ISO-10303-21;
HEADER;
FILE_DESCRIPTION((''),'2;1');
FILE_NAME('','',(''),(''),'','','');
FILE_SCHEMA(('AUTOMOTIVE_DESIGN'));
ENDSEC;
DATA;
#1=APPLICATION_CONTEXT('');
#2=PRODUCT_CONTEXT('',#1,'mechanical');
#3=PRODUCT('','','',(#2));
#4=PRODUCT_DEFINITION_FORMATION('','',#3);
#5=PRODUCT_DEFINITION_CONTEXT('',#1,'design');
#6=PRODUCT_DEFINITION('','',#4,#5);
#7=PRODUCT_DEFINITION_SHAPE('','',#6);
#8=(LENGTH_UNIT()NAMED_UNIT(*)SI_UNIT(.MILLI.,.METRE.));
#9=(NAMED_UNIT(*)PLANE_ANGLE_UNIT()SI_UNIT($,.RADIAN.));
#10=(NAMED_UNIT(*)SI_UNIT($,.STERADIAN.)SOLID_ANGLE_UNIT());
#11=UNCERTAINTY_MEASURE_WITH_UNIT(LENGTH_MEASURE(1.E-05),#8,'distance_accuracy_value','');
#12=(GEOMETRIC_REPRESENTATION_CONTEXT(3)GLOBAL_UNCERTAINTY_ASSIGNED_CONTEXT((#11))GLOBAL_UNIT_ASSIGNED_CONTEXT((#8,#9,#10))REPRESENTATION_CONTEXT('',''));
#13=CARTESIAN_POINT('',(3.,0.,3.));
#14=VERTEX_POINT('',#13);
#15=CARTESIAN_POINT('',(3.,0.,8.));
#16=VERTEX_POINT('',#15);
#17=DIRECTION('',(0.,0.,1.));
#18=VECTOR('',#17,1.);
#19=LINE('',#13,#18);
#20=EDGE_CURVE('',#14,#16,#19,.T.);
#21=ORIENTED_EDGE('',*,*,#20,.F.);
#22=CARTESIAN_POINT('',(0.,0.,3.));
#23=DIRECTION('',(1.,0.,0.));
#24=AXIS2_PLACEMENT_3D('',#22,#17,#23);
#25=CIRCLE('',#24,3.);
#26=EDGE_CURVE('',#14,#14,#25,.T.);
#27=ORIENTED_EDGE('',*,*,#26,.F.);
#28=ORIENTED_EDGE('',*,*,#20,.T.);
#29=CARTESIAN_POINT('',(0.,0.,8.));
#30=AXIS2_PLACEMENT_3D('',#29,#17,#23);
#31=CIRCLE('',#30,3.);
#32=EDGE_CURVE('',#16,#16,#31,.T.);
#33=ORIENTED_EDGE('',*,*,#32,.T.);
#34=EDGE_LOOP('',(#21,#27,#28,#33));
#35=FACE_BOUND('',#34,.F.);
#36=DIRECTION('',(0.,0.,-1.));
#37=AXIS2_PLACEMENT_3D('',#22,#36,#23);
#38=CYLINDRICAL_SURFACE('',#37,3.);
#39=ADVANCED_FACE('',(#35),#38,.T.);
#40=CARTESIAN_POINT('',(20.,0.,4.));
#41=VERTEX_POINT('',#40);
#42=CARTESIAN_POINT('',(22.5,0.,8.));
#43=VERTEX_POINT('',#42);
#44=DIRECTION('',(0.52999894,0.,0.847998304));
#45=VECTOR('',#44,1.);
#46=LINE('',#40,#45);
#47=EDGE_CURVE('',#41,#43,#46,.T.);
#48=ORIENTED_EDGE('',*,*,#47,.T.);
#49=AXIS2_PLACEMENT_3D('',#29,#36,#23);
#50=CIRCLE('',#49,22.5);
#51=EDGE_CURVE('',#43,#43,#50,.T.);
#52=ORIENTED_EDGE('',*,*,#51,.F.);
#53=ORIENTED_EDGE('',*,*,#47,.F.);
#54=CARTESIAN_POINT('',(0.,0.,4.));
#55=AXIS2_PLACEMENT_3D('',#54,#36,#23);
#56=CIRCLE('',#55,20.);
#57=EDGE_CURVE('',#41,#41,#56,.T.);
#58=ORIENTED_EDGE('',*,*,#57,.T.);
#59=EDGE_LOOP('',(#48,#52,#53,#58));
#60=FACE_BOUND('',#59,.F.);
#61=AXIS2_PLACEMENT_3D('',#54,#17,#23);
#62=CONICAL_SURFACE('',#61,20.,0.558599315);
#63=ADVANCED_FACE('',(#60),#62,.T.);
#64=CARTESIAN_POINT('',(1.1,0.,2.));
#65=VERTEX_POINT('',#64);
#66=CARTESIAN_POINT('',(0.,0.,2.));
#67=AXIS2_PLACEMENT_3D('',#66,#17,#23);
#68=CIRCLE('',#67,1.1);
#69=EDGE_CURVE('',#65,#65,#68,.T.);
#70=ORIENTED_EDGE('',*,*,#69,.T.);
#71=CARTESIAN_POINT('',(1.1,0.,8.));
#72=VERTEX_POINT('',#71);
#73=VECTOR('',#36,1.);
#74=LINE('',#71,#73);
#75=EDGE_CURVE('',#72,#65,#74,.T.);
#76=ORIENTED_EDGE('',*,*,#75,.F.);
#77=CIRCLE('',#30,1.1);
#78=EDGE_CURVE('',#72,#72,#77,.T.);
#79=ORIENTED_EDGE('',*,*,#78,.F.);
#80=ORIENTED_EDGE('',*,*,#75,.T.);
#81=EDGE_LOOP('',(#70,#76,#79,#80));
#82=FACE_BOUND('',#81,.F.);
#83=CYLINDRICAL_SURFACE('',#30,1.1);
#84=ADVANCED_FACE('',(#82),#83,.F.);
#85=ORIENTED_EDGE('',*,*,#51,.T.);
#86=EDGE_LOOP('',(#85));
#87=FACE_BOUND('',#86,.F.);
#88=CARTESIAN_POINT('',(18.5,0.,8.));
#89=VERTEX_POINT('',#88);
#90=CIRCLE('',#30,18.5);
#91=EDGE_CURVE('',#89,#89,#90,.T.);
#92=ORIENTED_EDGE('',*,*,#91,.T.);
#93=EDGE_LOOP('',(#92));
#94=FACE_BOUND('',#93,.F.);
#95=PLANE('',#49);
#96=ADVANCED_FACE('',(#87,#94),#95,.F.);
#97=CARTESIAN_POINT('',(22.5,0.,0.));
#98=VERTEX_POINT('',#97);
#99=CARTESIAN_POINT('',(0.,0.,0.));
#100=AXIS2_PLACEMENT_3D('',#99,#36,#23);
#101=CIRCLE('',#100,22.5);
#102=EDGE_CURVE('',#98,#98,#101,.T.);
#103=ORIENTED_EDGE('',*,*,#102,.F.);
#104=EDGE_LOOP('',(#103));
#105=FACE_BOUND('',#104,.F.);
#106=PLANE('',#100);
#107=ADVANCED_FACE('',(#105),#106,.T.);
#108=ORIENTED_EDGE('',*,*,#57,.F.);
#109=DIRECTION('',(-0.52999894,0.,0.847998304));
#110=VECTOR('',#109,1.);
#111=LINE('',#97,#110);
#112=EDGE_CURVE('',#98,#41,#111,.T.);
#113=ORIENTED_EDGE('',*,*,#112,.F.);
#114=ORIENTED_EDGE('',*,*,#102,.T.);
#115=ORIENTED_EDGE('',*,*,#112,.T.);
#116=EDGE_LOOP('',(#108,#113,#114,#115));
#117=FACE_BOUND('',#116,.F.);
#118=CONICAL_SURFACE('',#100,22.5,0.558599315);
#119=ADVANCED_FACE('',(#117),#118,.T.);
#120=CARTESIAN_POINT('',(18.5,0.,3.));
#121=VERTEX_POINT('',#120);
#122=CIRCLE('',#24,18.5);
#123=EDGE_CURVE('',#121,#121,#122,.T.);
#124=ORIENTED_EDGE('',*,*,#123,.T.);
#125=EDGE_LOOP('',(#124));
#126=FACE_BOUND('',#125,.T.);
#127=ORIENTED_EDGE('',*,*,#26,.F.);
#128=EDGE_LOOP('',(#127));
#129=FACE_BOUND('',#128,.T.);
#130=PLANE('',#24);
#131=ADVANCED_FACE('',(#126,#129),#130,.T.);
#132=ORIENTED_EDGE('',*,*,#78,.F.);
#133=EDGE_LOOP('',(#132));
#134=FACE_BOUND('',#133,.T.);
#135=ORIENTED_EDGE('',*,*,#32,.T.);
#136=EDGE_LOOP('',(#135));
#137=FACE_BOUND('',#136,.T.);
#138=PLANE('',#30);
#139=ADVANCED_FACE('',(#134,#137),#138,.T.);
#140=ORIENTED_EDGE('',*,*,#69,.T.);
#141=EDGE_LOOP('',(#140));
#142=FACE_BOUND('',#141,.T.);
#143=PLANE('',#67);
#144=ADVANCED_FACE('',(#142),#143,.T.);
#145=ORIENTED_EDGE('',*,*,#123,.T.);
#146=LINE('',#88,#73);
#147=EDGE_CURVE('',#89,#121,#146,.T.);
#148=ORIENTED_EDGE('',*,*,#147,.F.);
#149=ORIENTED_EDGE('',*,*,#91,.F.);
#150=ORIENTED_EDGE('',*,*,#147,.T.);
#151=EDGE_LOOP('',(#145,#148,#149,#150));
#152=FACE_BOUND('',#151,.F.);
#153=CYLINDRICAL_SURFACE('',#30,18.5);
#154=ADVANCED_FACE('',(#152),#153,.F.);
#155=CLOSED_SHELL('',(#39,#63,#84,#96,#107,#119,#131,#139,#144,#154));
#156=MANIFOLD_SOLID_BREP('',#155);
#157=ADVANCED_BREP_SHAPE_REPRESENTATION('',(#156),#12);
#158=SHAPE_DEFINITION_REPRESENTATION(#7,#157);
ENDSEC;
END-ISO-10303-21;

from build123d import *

# Parameters (mm, degrees)
F3_R     = 18.5
F4_DEPTH = 5
F5_R     = 3
F6_DEPTH = 5
F7_R     = 1.1
F8_DEPTH = 6


with BuildPart() as f2:
    # F1 (on Front) → F2 (revolve)
    with BuildSketch(Plane.XZ):
        Polygon((0, 8), (0, 0), (22.5, 0), (20, 4), (22.5, 8), align=None)
    revolve(axis=Axis((0, 0, 4), (0, 0, -1)))

    # F3 (on face) → F4 (cut)
    with BuildSketch(Plane.XY.offset(8)):
        Circle(F3_R)
    extrude(amount=-F4_DEPTH, mode=Mode.SUBTRACT)

    # F5 (on face) → F6 (join, through all)
    with BuildSketch(Plane.XY.offset(3)):
        Circle(F5_R)
    extrude(amount=F6_DEPTH)

    # F7 (on face) → F8 (cut)
    with BuildSketch(Plane.XY.offset(8)):
        Circle(F7_R)
    extrude(amount=-F8_DEPTH, mode=Mode.SUBTRACT)


solid = f2.part
